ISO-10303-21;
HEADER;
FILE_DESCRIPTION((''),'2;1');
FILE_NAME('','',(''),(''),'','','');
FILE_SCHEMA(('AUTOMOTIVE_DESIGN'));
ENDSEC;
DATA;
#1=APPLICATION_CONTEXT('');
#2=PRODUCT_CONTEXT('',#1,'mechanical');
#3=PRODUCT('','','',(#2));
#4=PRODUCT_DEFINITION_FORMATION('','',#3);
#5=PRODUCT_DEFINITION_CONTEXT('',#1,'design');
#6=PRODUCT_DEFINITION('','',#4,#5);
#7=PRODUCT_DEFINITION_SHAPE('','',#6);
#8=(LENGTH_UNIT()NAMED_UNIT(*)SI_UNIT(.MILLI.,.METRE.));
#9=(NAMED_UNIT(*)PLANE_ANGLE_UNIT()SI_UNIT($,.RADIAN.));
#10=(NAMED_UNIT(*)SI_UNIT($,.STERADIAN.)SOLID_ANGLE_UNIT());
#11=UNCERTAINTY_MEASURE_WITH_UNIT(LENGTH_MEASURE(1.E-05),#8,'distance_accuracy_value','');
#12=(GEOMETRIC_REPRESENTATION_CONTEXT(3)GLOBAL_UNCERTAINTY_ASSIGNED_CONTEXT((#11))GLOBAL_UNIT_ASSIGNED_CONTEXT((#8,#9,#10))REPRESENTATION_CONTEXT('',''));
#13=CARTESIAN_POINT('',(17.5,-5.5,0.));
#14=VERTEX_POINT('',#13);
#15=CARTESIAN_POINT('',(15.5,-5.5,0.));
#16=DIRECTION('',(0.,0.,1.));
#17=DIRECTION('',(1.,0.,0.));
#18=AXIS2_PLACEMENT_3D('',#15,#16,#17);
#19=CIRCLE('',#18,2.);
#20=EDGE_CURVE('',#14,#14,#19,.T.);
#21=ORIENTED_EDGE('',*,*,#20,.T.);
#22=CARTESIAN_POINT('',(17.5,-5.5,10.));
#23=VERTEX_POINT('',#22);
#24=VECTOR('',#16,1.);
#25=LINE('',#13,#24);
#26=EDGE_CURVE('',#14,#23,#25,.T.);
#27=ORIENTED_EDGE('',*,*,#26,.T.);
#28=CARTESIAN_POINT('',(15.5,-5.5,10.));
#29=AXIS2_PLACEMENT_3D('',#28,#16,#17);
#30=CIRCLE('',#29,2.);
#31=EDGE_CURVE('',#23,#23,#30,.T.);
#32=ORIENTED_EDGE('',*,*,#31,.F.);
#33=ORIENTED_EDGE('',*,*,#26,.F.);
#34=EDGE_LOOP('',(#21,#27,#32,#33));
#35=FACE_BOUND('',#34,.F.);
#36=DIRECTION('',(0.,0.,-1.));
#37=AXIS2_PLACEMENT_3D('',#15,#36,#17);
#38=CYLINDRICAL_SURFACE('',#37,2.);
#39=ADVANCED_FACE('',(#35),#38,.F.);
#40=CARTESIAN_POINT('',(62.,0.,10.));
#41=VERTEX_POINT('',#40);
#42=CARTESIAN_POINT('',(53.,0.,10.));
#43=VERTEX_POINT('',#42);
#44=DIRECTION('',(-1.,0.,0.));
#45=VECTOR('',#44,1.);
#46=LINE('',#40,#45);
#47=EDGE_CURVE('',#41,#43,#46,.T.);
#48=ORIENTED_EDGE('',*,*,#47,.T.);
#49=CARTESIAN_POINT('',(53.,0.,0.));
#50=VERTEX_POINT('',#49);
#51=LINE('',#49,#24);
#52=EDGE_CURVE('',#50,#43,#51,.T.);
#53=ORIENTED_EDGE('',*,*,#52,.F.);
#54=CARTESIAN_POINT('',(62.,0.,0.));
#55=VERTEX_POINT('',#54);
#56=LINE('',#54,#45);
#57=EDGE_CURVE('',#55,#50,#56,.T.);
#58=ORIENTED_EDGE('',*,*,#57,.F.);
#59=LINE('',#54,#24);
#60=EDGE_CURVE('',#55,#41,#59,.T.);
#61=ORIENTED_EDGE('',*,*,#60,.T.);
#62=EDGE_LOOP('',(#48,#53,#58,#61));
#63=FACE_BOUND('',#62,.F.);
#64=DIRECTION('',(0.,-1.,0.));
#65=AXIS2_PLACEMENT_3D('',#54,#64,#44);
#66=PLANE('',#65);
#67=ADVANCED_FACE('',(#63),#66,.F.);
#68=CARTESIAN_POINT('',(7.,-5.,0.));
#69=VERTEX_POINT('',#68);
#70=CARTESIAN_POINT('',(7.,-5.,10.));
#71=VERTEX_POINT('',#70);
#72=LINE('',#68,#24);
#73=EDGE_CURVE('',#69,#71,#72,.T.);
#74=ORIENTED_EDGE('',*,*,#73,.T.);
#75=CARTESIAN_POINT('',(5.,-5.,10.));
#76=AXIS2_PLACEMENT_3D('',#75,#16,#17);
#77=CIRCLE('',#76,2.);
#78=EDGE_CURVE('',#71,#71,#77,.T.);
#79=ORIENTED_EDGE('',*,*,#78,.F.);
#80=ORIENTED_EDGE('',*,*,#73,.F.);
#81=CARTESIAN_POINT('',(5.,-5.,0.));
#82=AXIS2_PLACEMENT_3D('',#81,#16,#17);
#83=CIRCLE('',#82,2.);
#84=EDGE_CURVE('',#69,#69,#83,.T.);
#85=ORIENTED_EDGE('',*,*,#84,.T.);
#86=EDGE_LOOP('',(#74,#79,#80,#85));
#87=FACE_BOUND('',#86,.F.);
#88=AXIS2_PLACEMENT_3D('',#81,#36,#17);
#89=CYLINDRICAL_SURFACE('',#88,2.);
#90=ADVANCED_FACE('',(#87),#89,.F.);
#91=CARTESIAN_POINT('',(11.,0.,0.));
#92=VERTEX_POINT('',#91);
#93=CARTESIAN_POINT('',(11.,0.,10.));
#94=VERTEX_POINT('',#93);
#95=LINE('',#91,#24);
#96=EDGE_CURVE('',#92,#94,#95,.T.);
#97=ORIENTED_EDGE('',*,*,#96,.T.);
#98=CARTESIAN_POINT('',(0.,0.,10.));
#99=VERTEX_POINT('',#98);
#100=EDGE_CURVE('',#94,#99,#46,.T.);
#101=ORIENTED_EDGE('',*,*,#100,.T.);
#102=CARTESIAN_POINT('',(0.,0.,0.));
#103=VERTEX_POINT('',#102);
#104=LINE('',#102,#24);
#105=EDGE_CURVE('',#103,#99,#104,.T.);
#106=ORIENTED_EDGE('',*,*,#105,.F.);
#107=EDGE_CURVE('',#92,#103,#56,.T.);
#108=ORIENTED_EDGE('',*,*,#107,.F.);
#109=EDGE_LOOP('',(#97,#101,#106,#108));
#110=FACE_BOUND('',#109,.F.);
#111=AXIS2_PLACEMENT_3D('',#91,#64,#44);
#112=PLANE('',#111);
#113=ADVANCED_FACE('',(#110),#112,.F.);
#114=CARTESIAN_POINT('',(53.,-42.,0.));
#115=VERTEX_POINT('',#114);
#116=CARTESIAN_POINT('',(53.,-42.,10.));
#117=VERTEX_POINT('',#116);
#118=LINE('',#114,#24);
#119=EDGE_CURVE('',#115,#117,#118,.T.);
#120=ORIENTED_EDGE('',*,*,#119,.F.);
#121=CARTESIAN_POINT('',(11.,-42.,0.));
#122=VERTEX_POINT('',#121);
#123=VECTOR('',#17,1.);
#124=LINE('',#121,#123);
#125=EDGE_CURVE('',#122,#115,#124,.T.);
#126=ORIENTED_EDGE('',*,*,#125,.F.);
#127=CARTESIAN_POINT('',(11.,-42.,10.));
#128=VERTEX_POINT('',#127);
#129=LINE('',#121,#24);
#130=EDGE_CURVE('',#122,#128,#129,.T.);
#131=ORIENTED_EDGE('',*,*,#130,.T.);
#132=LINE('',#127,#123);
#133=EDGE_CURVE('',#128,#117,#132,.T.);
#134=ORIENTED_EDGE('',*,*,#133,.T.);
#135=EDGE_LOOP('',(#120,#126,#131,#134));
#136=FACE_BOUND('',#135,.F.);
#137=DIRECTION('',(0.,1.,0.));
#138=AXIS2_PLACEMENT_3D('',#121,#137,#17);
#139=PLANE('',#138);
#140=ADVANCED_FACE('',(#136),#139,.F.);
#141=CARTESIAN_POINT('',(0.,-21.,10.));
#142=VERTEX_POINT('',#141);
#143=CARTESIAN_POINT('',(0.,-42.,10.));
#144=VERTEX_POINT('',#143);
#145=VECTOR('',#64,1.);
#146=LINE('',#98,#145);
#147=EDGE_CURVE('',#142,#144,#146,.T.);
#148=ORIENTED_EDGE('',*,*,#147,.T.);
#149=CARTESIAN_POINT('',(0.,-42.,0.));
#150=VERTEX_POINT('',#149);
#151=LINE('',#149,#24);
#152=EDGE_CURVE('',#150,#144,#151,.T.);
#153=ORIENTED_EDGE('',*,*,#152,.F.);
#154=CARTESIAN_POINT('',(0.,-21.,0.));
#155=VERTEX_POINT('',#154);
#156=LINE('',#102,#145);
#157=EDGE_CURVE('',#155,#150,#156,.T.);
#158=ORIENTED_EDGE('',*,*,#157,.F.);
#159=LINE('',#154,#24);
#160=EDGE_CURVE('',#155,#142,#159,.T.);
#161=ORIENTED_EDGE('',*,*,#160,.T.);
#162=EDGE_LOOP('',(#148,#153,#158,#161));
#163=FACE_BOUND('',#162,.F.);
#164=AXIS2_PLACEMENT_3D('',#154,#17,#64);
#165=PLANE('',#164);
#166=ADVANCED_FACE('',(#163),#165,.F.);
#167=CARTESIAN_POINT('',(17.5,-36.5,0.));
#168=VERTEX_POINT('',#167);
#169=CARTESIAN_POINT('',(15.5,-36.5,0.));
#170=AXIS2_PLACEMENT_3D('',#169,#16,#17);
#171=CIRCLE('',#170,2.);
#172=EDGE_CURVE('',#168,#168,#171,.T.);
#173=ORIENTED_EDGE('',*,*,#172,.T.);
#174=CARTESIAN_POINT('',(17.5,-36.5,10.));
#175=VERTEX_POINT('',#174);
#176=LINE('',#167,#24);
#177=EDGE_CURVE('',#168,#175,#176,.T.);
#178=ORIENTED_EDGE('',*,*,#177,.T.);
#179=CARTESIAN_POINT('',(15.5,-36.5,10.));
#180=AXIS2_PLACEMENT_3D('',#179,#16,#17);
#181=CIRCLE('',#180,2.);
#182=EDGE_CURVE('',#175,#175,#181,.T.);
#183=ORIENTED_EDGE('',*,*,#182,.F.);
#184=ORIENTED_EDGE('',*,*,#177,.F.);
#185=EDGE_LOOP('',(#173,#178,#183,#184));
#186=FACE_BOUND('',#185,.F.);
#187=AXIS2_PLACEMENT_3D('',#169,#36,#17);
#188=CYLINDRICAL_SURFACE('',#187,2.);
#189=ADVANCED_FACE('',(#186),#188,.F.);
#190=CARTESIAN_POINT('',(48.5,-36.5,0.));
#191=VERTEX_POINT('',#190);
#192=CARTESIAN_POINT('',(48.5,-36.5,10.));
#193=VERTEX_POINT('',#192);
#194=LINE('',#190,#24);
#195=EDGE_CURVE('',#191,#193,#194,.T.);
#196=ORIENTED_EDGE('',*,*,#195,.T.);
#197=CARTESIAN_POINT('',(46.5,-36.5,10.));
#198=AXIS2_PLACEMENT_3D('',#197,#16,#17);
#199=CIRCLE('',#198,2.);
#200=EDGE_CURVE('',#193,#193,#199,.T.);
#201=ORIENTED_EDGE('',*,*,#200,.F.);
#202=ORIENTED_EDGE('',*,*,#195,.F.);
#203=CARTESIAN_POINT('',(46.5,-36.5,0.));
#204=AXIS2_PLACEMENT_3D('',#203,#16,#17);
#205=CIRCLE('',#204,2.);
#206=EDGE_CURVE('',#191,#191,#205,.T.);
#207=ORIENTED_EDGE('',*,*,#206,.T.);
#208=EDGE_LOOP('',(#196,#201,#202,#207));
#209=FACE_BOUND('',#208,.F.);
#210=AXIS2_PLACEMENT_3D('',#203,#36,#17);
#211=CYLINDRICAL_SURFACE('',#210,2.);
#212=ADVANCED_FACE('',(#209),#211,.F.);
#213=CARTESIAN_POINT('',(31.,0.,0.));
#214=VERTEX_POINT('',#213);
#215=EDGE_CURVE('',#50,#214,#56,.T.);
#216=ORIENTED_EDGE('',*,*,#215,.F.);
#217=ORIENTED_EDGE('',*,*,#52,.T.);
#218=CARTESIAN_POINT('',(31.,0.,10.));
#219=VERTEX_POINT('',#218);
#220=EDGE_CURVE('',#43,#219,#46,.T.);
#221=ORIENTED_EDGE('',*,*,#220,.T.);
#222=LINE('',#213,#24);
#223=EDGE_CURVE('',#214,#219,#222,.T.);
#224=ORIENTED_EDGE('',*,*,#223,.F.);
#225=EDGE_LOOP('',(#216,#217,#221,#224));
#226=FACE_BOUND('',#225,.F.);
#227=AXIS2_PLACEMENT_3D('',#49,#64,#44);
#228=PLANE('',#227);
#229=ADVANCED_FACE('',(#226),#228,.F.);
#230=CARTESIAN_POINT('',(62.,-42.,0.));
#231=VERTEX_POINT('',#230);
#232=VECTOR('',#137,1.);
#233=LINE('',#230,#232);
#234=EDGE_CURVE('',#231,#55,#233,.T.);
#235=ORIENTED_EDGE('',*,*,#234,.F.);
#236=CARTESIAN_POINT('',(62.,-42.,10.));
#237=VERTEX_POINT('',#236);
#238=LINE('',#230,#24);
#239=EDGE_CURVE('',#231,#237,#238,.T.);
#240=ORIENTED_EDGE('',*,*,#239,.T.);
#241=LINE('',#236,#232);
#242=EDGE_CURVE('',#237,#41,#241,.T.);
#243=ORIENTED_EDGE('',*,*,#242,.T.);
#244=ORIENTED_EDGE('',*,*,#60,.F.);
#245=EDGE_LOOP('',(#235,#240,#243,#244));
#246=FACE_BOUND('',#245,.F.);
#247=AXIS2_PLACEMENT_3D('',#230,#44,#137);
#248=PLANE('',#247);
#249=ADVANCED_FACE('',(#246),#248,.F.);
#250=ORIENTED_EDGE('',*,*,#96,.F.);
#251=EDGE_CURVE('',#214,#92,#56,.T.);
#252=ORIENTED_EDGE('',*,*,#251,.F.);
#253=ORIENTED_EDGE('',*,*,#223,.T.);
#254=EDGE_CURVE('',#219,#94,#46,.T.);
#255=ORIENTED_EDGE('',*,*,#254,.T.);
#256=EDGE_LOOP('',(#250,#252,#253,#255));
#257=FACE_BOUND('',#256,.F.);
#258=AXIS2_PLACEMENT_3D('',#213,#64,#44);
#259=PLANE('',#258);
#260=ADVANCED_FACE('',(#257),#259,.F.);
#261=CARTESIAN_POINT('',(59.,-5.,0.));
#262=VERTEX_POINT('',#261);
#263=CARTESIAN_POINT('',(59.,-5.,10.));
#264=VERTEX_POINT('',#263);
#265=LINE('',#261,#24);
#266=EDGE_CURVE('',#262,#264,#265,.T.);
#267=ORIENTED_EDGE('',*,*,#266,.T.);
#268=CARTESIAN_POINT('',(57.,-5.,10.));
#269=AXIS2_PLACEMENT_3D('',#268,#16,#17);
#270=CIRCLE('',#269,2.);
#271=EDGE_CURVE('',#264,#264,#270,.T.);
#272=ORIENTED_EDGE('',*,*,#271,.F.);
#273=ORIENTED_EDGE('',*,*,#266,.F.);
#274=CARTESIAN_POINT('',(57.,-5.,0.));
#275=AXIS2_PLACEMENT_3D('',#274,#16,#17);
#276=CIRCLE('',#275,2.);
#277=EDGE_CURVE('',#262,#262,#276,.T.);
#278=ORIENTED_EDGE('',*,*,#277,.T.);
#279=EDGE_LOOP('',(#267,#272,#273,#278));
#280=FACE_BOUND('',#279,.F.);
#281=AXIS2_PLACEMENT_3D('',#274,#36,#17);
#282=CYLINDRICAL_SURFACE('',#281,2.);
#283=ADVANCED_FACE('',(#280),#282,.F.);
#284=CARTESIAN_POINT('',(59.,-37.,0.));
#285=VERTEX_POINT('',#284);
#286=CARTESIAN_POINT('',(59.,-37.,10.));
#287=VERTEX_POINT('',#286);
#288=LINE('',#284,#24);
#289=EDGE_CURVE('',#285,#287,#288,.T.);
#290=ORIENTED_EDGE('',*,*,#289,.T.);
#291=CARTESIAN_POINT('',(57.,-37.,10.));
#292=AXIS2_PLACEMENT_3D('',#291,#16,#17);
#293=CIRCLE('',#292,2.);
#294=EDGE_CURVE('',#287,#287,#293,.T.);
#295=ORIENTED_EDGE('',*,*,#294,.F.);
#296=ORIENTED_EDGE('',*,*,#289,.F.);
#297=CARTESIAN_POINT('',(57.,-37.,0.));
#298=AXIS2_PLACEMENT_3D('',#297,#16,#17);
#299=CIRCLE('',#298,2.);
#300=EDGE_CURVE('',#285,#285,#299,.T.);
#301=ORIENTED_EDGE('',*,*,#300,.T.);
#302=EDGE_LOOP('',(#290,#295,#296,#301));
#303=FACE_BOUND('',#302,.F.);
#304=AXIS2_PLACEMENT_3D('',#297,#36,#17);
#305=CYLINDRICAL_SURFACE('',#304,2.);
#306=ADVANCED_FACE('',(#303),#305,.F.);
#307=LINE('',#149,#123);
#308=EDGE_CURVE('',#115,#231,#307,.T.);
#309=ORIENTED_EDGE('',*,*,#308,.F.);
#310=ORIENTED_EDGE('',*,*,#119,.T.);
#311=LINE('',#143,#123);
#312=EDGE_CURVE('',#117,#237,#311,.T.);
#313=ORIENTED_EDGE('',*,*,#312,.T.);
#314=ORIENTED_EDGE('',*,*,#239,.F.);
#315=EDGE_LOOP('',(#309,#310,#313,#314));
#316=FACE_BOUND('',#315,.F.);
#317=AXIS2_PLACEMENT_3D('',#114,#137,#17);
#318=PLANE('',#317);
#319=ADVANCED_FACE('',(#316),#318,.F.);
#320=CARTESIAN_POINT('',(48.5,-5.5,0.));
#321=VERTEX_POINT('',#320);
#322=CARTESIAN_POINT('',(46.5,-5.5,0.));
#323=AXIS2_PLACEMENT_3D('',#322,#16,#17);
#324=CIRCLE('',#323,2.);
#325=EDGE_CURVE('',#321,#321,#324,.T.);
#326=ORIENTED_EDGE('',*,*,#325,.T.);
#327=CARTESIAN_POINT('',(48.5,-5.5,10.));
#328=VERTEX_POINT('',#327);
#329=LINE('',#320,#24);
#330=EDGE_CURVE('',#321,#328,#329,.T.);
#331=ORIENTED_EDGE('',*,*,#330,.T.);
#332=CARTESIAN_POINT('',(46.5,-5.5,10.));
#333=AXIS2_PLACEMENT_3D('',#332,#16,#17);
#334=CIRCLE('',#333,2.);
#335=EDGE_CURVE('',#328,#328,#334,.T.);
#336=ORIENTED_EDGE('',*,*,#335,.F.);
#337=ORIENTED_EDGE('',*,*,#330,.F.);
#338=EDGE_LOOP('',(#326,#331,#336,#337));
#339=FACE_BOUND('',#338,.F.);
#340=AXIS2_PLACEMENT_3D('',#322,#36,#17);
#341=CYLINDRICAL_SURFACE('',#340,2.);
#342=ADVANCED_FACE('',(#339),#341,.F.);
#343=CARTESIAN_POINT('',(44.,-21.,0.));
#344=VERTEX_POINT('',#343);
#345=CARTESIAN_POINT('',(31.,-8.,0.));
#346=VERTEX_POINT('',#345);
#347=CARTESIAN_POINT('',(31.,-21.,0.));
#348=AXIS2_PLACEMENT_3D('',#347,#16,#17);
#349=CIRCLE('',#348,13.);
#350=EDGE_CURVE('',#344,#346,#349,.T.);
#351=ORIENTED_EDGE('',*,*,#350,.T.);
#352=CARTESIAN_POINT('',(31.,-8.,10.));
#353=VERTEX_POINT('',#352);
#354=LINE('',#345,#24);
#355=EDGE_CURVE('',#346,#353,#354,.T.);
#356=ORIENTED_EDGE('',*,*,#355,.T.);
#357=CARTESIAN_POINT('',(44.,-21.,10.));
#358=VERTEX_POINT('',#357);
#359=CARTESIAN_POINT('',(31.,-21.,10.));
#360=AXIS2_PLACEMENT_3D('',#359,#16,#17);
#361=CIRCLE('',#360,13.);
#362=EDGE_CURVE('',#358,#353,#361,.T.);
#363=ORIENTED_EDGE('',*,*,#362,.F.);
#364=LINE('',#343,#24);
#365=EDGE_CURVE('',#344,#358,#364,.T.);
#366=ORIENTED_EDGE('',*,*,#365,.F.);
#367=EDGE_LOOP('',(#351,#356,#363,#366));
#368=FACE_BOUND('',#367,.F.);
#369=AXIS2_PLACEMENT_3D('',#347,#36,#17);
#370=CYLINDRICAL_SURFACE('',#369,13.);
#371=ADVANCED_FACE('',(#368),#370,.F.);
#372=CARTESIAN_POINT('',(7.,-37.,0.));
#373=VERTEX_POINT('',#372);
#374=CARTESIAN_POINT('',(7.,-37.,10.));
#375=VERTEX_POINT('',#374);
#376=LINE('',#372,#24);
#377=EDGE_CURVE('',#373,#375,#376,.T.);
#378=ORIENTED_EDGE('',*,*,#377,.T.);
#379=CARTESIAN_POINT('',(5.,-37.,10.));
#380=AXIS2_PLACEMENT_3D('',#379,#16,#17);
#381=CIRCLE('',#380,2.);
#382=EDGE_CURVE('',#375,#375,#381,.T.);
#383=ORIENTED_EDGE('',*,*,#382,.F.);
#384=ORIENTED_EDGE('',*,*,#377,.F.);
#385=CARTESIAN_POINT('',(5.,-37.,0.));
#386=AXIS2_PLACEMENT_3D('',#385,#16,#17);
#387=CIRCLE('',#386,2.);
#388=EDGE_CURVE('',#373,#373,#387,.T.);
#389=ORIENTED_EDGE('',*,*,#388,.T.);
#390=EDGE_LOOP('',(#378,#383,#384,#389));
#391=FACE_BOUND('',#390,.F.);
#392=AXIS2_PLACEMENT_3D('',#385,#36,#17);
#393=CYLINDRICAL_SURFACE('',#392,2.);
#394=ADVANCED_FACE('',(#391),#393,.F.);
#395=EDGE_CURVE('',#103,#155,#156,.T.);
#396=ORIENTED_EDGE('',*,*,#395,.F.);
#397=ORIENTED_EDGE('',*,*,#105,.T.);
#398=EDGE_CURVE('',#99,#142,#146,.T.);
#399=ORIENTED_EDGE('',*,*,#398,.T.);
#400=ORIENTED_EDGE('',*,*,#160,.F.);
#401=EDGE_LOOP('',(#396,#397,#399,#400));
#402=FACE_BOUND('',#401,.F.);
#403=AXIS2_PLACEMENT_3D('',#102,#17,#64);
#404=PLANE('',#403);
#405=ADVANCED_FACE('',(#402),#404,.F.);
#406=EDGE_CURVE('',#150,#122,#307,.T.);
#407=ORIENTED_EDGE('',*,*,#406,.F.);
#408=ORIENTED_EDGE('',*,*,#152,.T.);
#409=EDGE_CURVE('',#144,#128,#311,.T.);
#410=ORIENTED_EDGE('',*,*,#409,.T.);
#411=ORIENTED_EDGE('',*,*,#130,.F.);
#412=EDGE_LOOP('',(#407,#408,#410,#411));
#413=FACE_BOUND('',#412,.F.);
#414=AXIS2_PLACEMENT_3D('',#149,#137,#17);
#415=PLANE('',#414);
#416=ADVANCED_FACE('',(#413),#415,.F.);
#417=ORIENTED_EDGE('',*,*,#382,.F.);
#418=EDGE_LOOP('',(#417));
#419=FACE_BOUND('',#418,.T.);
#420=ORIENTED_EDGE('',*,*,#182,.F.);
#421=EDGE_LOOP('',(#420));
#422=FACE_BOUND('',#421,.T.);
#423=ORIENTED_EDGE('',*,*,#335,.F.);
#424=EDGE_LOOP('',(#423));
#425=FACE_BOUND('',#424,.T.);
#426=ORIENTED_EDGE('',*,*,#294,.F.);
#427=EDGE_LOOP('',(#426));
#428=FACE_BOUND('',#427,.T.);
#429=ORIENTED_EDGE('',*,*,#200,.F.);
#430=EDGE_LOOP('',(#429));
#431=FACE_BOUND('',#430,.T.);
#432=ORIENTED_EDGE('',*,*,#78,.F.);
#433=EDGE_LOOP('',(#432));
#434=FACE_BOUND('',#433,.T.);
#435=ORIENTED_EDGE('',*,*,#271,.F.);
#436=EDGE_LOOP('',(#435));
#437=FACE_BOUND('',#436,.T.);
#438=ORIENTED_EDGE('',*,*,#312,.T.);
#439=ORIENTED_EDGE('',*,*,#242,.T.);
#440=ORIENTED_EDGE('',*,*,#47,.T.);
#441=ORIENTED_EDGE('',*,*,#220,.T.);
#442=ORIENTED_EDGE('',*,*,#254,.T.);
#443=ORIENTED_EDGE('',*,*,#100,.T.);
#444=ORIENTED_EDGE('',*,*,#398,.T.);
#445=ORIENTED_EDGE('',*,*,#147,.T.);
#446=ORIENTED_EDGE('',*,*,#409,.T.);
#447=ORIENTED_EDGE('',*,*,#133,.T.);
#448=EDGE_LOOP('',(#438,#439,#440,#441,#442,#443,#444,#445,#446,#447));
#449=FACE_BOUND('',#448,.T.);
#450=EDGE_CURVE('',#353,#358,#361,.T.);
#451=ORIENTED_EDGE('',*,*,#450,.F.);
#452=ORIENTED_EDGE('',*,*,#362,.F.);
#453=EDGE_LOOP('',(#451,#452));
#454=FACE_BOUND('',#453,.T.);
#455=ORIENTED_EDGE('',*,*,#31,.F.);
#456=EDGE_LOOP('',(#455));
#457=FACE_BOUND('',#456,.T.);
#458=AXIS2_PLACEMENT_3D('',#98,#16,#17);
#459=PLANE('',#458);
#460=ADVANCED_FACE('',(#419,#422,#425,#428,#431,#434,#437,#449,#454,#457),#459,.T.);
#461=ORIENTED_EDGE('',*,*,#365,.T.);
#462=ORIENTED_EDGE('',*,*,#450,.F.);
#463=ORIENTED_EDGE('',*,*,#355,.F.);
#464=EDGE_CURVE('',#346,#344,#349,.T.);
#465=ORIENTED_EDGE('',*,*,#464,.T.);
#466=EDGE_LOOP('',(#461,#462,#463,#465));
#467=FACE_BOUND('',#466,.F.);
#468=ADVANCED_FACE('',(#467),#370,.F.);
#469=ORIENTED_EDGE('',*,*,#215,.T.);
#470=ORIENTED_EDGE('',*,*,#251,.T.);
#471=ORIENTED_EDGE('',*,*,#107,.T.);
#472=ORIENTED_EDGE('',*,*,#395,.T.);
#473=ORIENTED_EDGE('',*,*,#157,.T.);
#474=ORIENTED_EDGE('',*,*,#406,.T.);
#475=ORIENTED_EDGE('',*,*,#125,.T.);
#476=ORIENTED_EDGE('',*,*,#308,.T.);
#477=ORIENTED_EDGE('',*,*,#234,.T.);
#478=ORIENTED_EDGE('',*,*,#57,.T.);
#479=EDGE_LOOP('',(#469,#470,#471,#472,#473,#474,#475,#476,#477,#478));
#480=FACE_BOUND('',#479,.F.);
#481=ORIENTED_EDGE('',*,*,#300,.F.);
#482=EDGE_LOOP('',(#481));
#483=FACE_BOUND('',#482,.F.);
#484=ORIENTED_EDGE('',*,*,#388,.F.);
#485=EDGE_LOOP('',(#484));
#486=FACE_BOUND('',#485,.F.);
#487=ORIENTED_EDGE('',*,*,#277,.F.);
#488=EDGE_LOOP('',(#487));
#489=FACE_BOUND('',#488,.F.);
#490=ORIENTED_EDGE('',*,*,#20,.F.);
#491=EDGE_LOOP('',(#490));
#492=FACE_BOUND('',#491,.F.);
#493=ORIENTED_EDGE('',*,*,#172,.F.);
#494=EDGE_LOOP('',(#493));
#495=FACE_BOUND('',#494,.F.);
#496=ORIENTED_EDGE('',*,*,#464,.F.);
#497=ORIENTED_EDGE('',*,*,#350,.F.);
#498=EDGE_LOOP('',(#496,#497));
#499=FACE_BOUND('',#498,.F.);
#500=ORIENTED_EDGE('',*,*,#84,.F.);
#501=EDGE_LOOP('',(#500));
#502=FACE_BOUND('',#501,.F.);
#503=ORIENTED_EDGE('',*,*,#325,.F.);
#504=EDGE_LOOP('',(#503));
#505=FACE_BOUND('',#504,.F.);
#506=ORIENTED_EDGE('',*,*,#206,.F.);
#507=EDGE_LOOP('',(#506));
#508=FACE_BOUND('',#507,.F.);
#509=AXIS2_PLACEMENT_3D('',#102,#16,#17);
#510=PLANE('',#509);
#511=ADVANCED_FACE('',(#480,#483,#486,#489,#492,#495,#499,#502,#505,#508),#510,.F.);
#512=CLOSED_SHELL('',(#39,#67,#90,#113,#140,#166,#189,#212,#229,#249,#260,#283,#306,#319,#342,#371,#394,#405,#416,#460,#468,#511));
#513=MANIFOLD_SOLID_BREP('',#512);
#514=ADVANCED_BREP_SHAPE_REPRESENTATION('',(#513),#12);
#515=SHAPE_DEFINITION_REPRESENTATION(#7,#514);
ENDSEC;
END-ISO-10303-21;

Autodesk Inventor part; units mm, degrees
ref_plane "YZ Plane" through (0, 0, 0) normal (1, 0, 0) x (0, 1, 0)
ref_plane "XZ Plane" through (0, 0, 0) normal (0, 1, 0) x (-1, 0, 0)
ref_plane "XY Plane" through (0, 0, 0) normal (0, 0, 1) x (1, 0, 0)
sketch "Sketch1" plane through (0, 0, 0) normal (0, 0, 1) x (1, 0, 0)
  line L0 (0, 0) -> (0, -42)
  line L1 (0, -42) -> (62, -42)
  line L2 (62, -42) -> (62, 0)
  line L3 (62, 0) -> (0, 0)
  line L4 (11, -42) -> (53, -42)
  line L5 (53, 0) -> (11, 0)
  line L6 (10, -5.9896) -> (10, -30.0104)
  line L7 (31, 0) -> (31, -13)
  circle A0 centre (5, -5) radius 2
  line L8 (0, -21) -> (-21.0238, -21)
  circle A1 centre (31, -21) radius 13
  circle A2 centre (15.5, -5.5) radius 2
  circle A3 centre (15.5, -36.5) radius 2
  circle A4 centre (5, -37) radius 2
  line L9 (52, -5.9896) -> (52, -30.0104)
  circle A5 centre (57, -5) radius 2
  circle A6 centre (46.5, -5.5) radius 2
  circle A7 centre (46.5, -36.5) radius 2
  circle A8 centre (57, -37) radius 2
  dimension "d0" = 42
  dimension "d1" = 62
  dimension "d42" = 10
  dimension "d43" = 4
  dimension "d44" = 5
  dimension "d45" = 5
  dimension "d46" = 26
  dimension "d47" = 4
  dimension "d50" = 4
  dimension "d51" = 5.5
  dimension "d52" = 5.5
  dimension "d53" = 5.5
  dimension "d54" = 31
extrude "Extrusion4" add sketch "Sketch1" along normal blind 10
thread "Rosca1" size "M4x0.7" class "6H" standard "ISO Metric profile" length 430
thread "Rosca2" size "M4x0.7" class "6H" standard "ISO Metric profile" length 430
thread "Rosca3" size "M4x0.7" class "6H" standard "ISO Metric profile" length 430
thread "Rosca4" size "M4x0.7" class "6H" standard "ISO Metric profile" length 430
properties part number "Techo Espaciador Sub. Inferior" material "Aluminum 6061"
